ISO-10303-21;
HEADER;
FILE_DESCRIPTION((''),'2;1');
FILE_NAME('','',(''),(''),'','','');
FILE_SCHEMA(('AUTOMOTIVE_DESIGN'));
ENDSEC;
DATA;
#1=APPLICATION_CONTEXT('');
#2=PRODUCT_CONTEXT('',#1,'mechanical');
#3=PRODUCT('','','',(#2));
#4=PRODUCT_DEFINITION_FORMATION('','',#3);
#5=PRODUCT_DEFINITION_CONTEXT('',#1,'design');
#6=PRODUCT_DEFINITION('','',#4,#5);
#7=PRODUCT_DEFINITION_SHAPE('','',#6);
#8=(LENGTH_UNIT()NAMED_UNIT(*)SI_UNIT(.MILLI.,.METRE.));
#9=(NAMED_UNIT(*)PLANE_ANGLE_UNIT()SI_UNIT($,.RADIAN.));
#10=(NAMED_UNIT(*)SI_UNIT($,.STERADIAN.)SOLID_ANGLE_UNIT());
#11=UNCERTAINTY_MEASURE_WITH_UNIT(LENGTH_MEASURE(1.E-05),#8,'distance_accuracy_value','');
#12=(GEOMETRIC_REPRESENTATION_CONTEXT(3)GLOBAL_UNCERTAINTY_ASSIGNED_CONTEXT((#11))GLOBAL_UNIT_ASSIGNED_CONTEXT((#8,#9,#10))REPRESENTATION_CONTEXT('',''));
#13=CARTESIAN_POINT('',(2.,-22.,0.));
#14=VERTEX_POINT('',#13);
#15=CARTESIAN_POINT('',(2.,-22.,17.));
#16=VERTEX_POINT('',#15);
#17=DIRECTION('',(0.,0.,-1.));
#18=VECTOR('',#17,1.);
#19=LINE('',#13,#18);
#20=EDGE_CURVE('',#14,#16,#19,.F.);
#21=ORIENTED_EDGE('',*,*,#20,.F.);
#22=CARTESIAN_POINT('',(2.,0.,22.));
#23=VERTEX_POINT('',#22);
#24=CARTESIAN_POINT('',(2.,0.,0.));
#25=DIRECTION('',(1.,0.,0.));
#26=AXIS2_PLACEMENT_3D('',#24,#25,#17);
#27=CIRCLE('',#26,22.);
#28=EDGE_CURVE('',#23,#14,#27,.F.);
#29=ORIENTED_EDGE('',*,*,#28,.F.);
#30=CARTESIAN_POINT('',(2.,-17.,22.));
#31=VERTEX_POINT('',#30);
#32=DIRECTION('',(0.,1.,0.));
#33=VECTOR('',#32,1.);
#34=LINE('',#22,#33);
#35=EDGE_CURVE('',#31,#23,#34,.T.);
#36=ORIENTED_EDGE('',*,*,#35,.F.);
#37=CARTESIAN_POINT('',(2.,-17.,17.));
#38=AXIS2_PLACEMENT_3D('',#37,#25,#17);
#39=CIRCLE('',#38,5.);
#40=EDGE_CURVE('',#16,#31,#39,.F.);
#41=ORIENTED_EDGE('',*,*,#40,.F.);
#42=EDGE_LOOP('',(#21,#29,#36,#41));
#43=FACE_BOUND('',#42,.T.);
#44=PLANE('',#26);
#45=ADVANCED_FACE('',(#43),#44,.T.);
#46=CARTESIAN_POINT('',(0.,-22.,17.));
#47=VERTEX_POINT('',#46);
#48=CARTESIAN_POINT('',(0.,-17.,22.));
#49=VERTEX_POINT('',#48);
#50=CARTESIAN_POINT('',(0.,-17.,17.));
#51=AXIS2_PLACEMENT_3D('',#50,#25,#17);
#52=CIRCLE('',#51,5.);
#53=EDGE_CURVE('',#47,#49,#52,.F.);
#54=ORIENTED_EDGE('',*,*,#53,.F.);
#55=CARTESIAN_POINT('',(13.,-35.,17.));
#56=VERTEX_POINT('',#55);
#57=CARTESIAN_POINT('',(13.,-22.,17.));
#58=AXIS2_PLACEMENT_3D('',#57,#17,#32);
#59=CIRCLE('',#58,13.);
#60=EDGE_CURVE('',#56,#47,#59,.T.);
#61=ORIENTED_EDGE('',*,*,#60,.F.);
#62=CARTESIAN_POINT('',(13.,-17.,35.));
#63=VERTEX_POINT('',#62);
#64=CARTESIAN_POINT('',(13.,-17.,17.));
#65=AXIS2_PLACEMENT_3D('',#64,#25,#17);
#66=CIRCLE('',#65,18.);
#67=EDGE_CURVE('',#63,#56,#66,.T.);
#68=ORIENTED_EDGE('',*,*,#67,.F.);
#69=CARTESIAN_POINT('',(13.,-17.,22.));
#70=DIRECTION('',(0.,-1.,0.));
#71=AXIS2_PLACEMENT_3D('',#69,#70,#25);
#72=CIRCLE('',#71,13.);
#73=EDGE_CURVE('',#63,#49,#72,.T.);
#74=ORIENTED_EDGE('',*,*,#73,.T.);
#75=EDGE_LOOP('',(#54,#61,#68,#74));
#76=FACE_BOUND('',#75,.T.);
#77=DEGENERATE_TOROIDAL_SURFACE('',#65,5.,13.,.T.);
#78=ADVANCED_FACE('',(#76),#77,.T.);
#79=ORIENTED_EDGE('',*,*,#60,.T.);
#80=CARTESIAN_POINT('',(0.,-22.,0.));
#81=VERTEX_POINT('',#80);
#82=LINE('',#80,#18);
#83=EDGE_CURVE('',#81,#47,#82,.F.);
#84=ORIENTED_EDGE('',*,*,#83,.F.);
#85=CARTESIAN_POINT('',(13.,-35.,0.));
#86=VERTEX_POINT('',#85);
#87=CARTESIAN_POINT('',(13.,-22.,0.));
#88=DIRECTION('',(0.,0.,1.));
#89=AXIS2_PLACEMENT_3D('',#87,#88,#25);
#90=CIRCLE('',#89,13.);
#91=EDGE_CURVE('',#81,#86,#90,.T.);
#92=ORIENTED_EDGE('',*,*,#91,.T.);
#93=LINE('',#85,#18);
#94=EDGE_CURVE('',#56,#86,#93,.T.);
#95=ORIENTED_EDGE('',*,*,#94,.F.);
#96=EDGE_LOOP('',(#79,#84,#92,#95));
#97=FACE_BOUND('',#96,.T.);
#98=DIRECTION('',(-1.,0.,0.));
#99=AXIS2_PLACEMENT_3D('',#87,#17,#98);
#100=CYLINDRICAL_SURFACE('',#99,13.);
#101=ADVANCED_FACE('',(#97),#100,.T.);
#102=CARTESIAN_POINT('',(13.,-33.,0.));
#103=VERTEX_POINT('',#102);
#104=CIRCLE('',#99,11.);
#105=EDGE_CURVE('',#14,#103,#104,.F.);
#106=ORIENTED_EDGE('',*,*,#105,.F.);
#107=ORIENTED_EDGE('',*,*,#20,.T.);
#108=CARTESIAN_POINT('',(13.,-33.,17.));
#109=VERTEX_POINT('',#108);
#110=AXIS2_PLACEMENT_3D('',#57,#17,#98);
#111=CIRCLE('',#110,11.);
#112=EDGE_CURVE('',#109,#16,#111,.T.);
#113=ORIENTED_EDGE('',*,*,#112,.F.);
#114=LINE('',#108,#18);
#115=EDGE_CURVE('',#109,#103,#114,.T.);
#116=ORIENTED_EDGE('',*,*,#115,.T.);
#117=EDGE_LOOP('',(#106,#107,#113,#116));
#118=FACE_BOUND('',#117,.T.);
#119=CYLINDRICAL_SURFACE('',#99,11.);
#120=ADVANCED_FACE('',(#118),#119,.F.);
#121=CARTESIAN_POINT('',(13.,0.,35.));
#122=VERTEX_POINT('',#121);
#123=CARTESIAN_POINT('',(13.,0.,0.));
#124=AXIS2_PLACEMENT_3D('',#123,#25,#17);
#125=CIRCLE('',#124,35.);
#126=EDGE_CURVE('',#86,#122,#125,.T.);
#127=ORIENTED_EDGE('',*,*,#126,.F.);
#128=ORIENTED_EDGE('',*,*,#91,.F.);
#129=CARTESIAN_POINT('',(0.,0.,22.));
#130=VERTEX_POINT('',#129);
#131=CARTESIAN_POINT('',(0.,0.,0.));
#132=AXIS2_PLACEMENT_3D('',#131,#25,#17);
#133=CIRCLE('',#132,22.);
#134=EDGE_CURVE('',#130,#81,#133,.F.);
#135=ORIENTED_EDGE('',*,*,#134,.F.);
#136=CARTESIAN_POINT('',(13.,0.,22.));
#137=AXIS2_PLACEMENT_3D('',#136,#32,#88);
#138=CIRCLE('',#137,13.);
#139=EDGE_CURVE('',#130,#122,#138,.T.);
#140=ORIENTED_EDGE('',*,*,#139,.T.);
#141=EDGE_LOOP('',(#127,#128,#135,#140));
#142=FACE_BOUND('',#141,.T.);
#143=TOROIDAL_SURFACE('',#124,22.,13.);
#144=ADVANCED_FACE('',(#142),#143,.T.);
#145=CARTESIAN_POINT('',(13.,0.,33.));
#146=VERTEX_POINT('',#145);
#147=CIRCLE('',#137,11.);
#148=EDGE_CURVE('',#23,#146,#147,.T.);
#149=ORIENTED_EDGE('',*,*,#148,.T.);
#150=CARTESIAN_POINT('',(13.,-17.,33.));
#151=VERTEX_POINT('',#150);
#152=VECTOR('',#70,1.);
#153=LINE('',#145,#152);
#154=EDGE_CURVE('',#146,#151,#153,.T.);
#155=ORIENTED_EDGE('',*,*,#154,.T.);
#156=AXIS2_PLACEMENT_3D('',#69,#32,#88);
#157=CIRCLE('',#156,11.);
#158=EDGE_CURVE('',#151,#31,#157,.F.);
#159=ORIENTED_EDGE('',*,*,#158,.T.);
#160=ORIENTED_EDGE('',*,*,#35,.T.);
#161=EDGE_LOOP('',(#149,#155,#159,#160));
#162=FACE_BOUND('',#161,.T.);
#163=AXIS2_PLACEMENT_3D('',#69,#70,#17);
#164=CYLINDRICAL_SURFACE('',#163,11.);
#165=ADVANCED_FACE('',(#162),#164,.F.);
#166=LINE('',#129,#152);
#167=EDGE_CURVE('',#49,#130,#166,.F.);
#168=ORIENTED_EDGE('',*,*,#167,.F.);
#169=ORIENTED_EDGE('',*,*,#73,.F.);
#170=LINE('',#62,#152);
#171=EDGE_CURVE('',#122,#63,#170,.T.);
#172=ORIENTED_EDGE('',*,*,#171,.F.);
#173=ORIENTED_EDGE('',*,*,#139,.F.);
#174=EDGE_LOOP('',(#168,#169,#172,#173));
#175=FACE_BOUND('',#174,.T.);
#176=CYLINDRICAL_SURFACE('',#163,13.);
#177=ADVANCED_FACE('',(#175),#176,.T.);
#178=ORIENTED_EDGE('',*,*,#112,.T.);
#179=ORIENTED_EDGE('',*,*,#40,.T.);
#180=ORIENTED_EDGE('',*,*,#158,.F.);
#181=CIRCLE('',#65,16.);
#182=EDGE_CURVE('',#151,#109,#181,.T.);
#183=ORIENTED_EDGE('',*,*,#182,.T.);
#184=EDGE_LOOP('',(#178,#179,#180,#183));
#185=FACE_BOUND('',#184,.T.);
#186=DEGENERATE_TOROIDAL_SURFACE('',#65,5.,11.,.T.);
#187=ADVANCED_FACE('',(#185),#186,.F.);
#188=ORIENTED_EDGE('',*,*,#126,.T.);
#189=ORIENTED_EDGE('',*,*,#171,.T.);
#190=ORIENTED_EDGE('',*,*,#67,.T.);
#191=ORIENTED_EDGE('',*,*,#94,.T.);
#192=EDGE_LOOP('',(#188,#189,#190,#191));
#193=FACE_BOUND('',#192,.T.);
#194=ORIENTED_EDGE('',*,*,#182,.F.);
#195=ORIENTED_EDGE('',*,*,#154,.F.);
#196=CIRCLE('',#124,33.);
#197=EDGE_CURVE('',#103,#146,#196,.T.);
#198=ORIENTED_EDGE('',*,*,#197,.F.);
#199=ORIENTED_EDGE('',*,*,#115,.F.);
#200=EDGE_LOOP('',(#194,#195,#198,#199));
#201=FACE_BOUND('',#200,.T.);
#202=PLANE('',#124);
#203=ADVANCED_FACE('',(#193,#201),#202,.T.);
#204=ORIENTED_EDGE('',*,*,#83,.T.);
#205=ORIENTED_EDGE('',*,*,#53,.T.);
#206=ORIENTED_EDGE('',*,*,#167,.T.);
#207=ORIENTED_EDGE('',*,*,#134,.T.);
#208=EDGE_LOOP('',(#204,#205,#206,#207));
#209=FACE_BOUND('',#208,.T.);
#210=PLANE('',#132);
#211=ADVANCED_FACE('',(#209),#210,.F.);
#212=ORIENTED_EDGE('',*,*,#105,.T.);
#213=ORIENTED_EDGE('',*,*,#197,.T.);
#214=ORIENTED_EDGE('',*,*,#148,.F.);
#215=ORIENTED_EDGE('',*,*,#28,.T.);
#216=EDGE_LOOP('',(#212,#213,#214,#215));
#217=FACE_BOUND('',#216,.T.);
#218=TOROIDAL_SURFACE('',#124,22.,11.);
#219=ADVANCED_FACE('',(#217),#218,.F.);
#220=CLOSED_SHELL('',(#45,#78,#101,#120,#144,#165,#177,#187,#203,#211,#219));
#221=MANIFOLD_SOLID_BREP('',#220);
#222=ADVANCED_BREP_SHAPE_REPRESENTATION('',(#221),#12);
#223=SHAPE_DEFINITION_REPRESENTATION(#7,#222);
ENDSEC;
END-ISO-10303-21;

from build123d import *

# Parameters (mm, degrees)
SALIENTE_EXTRUIR1_DEPTH = 13
REDONDEO1_R             = 13
VACIADO1_START          = -17
VACIADO1_3_DEPTH        = 17
VACIADO1_4_DEPTH        = 17


with BuildPart() as part:
    # Croquis1 → Saliente-Extruir1 (new body)
    with BuildSketch(Plane(origin=(0, 0, 0), x_dir=(0, 0, -1), z_dir=(1, 0, 0))):
        with BuildLine():
            Line((0, -35), (-17, -35))
            ThreePointArc((-17, -35), (-29.727922061, -29.727922061), (-35, -17))
            Line((-35, -17), (-35, 0))
            ThreePointArc((-35, 0), (24.748737342, 24.748737342), (0, -35))
        make_face()
    extrude(amount=SALIENTE_EXTRUIR1_DEPTH)

    # Redondeo1
    redondeo1_edges = [part.edges().sort_by_distance(p)[0] for p in [
        (0, -35, 8.5),
        (0, -29.727922061, 29.727922061),
        (0, -8.5, 35),
        (0, 24.748737342, -24.748737342),
    ]]
    fillet(redondeo1_edges, radius=REDONDEO1_R - 0.0001)  # a hair under: the kernel refuses the full size

    # Vaciado1: read off the stored shape, not the designer's step
    # Vaciado1 outline → Vaciado1 (revolve, cut)
    with BuildSketch(Plane(origin=(0, -17, 17), x_dir=(0, 1, 0), z_dir=(0, 0, -1))):
        with BuildLine():
            Line((0, 13), (0, 2))
            Line((0, 2), (5, 2))
            ThreePointArc((5, 2), (12.778174593, 5.221825407), (16, 13))
            Line((16, 13), (0, 13))
        make_face()
    revolve(axis=Axis((0, -17, 17), (1, 0, 0)), mode=Mode.SUBTRACT)

    # Vaciado1 2 outline → Vaciado1 2 (revolve, cut)
    with BuildSketch(Plane.YX):
        with BuildLine():
            Line((33, 13), (0, 13))
            Line((0, 13), (0, 2))
            Line((0, 2), (22, 2))
            ThreePointArc((22, 2), (29.778174593, 5.221825407), (33, 13))
        make_face()
    revolve(axis=Axis((0, 0, 0), (1, 0, 0)), mode=Mode.SUBTRACT)

    # Vaciado1 3 outline → Vaciado1 3 (cut)
    with BuildSketch(Plane(origin=(0, 0, 0), x_dir=(1, 0, 0), z_dir=(0, 1, 0)).offset(VACIADO1_START)):
        with BuildLine():
            ThreePointArc((2, -22), (5.221825407, -29.778174593), (13, -33))
            Line((13, -33), (13, -9))
            Line((13, -9), (2, -9))
            Line((2, -9), (2, -22))
        make_face()
    extrude(amount=VACIADO1_3_DEPTH, mode=Mode.SUBTRACT)

    # Vaciado1 4 outline → Vaciado1 4 (cut)
    with BuildSketch(Plane.XY):
        with BuildLine():
            ThreePointArc((2, -22), (5.221825407, -29.778174593), (13, -33))
            Line((13, -33), (13, 1))
            Line((13, 1), (2, 1))
            Line((2, 1), (2, -22))
        make_face()
    extrude(amount=VACIADO1_4_DEPTH, mode=Mode.SUBTRACT)


solid = part.part
